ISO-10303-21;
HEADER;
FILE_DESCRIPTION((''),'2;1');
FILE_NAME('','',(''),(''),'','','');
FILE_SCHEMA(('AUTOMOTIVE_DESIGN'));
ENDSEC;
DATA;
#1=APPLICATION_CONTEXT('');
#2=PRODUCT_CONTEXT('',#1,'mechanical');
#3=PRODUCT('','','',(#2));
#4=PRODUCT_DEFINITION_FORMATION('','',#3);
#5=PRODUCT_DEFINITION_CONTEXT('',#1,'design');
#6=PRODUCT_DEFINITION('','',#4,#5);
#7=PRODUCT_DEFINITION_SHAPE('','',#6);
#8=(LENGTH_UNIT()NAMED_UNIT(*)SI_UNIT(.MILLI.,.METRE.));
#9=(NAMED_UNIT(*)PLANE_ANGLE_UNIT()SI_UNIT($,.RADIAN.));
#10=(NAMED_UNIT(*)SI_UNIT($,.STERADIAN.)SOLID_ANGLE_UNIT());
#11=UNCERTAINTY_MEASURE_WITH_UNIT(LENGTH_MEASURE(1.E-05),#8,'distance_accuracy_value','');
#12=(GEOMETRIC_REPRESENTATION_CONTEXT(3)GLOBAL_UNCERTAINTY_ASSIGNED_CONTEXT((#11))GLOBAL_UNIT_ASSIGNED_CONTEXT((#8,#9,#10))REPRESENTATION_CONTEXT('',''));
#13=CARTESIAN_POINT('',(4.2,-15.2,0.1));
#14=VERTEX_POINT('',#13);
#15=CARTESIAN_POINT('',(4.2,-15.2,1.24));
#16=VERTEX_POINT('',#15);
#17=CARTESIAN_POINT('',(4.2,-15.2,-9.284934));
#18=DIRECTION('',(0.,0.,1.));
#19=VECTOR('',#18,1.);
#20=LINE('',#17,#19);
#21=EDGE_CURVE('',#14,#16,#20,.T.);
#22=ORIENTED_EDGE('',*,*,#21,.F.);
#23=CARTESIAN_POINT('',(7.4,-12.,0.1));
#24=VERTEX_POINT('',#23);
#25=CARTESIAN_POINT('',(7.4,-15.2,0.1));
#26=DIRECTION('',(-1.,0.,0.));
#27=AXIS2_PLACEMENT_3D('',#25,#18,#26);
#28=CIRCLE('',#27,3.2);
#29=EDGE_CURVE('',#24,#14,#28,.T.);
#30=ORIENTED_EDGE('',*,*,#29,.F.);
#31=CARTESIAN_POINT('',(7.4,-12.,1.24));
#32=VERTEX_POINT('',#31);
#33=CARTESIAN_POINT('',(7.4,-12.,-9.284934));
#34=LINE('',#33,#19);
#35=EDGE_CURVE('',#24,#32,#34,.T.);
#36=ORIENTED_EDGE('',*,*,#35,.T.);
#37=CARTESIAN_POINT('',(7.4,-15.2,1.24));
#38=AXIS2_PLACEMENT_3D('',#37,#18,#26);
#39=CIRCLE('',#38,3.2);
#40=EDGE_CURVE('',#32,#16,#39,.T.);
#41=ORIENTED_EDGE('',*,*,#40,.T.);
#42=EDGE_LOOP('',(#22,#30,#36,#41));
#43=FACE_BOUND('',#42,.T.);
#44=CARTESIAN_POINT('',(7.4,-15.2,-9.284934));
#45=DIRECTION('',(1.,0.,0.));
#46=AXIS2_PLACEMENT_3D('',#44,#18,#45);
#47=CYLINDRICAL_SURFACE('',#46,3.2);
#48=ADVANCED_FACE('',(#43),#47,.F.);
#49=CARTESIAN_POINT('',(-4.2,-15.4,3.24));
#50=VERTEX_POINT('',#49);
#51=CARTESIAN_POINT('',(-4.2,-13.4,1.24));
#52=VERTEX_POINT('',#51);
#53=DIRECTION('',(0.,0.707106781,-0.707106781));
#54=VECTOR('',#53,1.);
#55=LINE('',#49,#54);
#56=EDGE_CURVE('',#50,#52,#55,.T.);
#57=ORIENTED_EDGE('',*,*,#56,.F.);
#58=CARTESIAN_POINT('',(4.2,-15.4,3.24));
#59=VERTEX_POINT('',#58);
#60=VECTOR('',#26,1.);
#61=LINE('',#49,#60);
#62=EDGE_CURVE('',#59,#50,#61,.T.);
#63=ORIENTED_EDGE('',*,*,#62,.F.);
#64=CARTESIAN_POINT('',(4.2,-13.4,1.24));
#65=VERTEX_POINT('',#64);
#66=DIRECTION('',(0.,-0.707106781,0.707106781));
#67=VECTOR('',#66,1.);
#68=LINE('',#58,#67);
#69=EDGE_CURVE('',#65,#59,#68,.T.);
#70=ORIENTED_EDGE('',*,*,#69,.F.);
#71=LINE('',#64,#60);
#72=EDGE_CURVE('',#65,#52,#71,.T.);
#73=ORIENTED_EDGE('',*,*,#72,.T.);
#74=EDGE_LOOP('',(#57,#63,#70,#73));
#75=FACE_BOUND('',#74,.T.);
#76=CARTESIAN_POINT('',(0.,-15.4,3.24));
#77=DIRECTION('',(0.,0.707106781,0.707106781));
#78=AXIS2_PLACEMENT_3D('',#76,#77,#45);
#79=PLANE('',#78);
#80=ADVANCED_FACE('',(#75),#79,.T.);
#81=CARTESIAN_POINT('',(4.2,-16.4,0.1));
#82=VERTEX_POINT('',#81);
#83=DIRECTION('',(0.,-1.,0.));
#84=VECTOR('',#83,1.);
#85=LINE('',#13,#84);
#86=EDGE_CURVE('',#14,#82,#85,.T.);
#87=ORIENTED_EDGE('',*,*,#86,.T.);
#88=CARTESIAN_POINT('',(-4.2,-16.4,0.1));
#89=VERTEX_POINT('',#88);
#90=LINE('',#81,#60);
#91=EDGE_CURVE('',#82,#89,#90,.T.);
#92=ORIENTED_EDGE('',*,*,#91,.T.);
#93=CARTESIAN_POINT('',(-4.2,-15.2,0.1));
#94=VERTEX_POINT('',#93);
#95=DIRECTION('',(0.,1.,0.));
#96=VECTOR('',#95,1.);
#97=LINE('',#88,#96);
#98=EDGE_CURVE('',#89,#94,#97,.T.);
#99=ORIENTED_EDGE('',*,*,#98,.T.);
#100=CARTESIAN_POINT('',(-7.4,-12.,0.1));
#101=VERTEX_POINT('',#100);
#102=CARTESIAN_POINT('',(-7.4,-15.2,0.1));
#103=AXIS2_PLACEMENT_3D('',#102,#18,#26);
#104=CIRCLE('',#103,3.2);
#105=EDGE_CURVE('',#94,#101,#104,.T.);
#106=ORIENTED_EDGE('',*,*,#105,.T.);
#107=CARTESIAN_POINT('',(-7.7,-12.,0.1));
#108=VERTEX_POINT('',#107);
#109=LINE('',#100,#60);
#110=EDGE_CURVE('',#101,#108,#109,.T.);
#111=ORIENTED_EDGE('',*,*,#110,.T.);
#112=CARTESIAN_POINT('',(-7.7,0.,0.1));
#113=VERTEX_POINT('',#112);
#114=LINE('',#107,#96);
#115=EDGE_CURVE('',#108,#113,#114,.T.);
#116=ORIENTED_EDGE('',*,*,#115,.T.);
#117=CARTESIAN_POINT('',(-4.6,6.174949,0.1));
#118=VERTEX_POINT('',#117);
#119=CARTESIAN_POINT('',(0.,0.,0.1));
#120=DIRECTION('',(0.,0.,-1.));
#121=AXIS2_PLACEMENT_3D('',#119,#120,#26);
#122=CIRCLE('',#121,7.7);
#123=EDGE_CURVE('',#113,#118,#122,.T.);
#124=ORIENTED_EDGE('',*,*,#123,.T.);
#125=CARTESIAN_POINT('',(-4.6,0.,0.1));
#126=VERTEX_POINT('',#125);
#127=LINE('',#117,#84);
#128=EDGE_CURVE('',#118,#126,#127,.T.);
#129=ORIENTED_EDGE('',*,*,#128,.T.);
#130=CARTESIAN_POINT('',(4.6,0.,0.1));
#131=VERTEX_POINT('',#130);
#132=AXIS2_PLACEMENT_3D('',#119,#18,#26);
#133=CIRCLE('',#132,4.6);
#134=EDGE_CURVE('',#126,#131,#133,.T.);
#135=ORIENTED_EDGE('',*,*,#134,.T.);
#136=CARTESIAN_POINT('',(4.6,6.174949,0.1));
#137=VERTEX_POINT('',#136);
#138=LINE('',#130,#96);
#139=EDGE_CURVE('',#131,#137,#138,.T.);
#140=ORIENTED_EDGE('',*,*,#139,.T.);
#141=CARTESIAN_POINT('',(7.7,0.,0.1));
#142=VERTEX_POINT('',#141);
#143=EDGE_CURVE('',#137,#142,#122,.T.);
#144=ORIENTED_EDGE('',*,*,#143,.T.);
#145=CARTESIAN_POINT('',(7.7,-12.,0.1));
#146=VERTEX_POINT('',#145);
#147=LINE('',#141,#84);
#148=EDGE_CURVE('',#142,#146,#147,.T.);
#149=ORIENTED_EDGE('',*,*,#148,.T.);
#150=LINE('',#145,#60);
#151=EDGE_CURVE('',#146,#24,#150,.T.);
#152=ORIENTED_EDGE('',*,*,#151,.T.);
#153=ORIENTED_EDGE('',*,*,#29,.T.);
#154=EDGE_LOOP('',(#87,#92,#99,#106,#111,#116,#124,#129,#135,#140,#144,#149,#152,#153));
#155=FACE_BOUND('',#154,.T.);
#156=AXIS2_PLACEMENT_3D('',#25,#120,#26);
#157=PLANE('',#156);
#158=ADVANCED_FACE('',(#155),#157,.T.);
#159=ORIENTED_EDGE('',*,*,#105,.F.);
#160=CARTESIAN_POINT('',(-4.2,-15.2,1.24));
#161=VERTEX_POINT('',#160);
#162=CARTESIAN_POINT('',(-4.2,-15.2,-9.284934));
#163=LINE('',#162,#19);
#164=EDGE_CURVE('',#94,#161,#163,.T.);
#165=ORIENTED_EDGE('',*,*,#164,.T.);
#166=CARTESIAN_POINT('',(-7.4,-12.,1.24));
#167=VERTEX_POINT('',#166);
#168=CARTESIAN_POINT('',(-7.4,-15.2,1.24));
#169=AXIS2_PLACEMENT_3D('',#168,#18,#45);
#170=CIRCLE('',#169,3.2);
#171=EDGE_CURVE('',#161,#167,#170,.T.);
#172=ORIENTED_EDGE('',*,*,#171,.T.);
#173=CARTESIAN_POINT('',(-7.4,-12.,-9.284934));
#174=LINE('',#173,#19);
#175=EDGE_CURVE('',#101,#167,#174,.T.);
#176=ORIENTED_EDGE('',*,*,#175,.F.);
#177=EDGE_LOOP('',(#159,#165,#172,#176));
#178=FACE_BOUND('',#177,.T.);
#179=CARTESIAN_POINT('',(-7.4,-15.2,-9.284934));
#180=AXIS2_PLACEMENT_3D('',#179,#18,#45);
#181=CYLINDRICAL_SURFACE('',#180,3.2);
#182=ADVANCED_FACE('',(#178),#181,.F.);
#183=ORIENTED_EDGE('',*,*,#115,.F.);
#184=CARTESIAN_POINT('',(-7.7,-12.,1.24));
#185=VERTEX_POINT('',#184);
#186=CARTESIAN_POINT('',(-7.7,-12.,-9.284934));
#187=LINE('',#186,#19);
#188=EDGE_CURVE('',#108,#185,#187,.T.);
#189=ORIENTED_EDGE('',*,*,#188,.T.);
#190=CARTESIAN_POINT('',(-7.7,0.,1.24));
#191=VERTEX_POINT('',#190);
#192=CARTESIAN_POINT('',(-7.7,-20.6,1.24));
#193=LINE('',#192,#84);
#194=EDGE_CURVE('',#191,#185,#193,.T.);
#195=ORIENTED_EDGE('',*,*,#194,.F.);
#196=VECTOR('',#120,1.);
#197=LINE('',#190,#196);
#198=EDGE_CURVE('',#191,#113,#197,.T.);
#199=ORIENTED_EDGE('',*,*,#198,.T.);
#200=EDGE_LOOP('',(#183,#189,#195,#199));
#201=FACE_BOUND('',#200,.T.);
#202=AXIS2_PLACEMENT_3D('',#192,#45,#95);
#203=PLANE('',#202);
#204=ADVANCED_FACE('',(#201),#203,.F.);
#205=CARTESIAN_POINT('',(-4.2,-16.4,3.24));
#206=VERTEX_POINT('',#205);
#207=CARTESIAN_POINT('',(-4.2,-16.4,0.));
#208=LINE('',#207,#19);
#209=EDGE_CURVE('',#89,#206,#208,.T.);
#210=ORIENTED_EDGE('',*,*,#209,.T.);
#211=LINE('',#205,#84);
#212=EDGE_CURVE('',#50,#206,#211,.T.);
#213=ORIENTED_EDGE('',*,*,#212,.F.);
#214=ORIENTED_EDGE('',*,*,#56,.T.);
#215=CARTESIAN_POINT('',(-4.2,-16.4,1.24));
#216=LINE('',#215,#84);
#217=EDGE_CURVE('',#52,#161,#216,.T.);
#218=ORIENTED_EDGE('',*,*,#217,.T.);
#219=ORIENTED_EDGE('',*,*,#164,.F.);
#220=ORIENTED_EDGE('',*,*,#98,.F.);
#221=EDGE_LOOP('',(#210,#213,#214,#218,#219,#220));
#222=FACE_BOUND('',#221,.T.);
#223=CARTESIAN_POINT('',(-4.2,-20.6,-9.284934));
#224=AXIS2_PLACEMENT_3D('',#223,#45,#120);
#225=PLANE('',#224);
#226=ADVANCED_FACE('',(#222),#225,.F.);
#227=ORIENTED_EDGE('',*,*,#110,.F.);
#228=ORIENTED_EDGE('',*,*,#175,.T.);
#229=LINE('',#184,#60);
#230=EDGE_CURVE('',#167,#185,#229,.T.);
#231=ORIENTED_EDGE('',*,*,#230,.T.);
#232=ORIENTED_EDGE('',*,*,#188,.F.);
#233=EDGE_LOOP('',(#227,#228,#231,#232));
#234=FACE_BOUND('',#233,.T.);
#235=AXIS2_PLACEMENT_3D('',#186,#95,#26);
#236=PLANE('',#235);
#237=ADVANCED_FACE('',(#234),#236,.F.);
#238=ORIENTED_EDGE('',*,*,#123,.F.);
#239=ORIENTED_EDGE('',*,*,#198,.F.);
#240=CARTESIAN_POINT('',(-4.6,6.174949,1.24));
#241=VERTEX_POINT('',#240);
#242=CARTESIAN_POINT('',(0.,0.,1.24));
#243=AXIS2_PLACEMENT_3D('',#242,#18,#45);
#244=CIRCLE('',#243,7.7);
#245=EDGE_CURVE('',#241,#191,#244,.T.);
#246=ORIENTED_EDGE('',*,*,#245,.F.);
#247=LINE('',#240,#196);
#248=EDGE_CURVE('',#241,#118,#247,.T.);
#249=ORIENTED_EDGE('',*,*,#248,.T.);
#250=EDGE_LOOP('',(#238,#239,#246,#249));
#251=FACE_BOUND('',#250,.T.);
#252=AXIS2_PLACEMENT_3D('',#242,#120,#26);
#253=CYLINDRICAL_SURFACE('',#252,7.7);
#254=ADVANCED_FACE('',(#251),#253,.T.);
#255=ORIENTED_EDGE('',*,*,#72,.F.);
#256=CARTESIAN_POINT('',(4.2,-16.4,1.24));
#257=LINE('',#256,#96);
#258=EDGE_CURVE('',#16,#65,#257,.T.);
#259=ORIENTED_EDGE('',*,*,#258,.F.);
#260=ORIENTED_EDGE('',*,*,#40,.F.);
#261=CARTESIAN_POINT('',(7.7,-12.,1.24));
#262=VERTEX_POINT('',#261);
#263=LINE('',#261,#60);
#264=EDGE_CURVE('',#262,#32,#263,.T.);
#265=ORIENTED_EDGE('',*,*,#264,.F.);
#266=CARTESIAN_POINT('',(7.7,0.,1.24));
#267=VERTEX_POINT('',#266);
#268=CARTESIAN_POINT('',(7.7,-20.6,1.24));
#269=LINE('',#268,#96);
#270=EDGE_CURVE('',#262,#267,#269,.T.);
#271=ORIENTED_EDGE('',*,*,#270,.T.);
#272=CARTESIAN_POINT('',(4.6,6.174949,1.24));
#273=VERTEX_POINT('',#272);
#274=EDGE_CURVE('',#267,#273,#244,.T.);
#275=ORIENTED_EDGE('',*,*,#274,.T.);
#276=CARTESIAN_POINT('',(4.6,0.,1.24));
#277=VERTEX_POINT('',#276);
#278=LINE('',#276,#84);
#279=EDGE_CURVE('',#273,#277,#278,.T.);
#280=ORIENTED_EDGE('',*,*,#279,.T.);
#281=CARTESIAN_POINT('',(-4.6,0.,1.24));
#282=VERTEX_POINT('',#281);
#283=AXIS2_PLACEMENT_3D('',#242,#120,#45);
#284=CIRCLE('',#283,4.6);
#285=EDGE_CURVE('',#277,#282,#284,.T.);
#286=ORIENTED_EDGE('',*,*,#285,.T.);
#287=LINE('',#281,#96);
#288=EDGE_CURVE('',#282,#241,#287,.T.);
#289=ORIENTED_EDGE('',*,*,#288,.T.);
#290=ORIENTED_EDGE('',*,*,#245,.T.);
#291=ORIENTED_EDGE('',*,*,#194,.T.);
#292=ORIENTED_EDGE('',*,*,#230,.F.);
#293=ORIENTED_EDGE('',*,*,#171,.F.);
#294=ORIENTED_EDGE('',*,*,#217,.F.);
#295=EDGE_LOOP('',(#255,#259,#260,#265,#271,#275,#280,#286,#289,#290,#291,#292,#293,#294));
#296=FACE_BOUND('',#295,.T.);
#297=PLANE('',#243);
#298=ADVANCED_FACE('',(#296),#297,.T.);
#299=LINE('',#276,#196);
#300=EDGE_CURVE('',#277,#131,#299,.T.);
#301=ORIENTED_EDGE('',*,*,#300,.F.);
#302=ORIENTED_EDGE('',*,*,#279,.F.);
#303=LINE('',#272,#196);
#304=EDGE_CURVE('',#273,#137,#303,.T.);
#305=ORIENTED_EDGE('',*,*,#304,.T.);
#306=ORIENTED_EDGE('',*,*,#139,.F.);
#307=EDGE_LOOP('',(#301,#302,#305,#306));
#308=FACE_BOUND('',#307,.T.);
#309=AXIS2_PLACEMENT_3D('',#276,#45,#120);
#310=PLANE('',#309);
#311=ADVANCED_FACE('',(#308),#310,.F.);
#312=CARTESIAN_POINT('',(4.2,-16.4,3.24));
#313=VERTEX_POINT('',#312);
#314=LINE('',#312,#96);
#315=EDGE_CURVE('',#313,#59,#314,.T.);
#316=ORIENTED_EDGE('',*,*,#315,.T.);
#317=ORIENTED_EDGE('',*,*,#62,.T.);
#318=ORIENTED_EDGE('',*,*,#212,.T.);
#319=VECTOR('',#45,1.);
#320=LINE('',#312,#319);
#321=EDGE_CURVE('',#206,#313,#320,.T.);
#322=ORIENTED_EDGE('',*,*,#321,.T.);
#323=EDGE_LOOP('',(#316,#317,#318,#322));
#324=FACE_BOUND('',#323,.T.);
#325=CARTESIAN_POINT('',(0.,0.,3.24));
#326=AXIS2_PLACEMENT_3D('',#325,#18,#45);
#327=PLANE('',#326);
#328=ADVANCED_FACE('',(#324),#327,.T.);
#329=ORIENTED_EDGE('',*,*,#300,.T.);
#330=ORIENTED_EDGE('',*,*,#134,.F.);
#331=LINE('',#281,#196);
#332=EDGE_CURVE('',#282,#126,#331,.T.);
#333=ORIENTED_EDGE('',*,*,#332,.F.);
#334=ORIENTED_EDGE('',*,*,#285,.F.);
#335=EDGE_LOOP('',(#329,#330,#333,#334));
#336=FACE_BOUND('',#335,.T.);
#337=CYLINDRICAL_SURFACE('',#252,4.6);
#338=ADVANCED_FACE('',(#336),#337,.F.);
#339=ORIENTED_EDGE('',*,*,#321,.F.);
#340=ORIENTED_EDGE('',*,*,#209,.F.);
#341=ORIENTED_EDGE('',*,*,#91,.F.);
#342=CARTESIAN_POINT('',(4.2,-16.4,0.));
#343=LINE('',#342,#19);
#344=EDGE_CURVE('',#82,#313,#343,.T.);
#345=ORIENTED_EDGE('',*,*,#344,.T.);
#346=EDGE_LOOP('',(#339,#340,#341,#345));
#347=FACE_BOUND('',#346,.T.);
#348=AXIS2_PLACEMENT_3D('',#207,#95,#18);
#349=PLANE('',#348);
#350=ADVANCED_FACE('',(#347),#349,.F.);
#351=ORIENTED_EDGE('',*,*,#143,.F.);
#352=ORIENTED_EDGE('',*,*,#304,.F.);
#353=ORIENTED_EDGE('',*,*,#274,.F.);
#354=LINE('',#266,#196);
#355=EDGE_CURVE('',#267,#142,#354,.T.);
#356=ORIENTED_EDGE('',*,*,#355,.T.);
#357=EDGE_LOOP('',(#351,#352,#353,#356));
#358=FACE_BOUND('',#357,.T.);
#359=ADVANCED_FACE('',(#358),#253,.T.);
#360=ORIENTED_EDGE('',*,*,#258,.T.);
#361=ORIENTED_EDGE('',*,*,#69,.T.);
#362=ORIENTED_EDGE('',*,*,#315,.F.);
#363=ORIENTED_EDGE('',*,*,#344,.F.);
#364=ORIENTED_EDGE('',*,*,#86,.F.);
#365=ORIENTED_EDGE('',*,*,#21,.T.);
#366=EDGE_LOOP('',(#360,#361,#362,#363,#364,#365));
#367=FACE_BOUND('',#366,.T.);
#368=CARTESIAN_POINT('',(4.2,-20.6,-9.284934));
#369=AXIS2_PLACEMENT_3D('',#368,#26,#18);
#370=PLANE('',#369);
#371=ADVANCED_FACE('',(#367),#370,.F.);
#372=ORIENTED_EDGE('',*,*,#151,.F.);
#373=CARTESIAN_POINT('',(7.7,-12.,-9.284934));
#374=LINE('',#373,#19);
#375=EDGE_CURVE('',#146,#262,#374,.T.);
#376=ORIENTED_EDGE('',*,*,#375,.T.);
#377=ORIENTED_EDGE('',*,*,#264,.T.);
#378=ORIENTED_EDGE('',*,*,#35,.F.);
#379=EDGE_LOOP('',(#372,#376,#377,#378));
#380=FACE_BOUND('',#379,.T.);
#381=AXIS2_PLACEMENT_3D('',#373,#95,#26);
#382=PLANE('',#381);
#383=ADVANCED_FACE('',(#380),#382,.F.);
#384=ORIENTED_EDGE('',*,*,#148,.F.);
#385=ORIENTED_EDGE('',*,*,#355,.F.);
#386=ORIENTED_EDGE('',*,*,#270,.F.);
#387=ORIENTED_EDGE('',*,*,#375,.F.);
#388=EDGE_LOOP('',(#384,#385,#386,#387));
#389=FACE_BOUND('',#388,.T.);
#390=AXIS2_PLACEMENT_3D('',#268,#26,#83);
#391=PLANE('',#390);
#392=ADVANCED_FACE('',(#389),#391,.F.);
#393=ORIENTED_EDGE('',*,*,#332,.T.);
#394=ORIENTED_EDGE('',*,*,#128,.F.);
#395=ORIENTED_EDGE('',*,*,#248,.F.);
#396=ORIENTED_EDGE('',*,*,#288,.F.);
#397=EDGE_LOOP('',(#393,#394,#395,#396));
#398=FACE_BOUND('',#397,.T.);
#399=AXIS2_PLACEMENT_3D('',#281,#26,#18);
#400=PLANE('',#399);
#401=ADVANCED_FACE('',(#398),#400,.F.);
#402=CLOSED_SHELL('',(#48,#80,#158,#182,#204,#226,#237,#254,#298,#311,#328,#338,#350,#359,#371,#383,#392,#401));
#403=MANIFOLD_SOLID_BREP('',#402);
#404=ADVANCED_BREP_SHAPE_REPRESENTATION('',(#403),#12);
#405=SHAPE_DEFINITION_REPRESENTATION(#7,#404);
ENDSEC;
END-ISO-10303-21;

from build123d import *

# Parameters (mm, degrees)
EXTRUDE_1_DEPTH     = 1.24
CUT_EXTRUDE_1_DEPTH = 1.24
SKETCH_4_W          = 8.4
SKETCH_4_H          = 3
EXTRUDE_2_DEPTH     = 2.2
CHAMFER_1_SIZE      = 1.2
CHAMFER_1_SIZE_2    = 2.4
SKETCH_5_W          = 8.4
SKETCH_5_H          = 4.2
CUT_EXTRUDE_2_DEPTH = 23.25946091
SKETCH_6_W          = 8.4
SKETCH_6_H          = 3
EXTRUDE_3_DEPTH     = 2
CHAMFER_2_SIZE      = 2
CUT_EXTRUDE_3_DEPTH = 0.1


# Some blends are built 0.0001 mm under size
with BuildPart() as part:
    # Эскиз1 → Бобышка-Вытянуть1 (new body)
    with BuildSketch(Plane.XY):
        with BuildLine():
            Line((-4.6, 0), (-4.6, 6.174949393))
            ThreePointArc((-4.6, 6.174949393), (-6.88149693, 3.454706934), (-7.7, 0))
            Line((-7.7, 0), (-7.7, -20.6))
            Line((-7.7, -20.6), (7.7, -20.6))
            Line((7.7, -20.6), (7.7, 0))
            ThreePointArc((7.7, 0), (6.88149693, 3.454706934), (4.6, 6.174949393))
            Line((4.6, 6.174949393), (4.6, 0))
            ThreePointArc((4.6, 0), (0, -4.6), (-4.6, 0))
        make_face()
    extrude(amount=EXTRUDE_1_DEPTH)

    # Эскиз3 → Вырез-Вытянуть1 (cut)
    with BuildSketch(Plane.XY.offset(1.24)):
        with BuildLine():
            Line((-7.7, -20.6), (-4.2, -20.6))
            Line((-4.2, -20.6), (-4.2, -15.2))
            ThreePointArc((-4.2, -15.2), (-5.1372583, -12.9372583), (-7.4, -12))
            Line((-7.4, -12), (-7.7, -12))
            Line((-7.7, -12), (-7.7, -20.6))
        make_face()
        with BuildLine():
            Line((4.2, -20.6), (4.2, -15.2))
            ThreePointArc((4.2, -15.2), (5.1372583, -12.9372583), (7.4, -12))
            Line((7.4, -12), (7.7, -12))
            Line((7.7, -12), (7.7, -20.6))
            Line((7.7, -20.6), (4.2, -20.6))
        make_face()
    extrude(amount=-CUT_EXTRUDE_1_DEPTH, mode=Mode.SUBTRACT)

    # Эскиз4 → Бобышка-Вытянуть2 (add)
    with BuildSketch(Plane.XY.offset(1.24)):
        with Locations((0, -19.1)):
            Rectangle(SKETCH_4_W, SKETCH_4_H)
    extrude(amount=EXTRUDE_2_DEPTH)

    # Фаска1
    # the kernel refuses this chamfer: 2.4, 1.2 mm, written as the material it adds along each edge
    with BuildSketch(Plane(origin=(4.2, -17.6, 1.24), x_dir=(0, 0.9976223042390325, -0.06891834360170876), z_dir=(-1, 0, 0))) as chamfer_1_piece_1_section:
        Polygon((CHAMFER_1_SIZE * 0.997622304239, -CHAMFER_1_SIZE * 0.0689183436017), (-CHAMFER_1_SIZE_2 * 0.0689183436017, -CHAMFER_1_SIZE_2 * 0.997622304239), (0, 0), align=None)
    chamfer_1_piece_1 = extrude(amount=8.4, mode=Mode.PRIVATE)
    chamfer_1_piece_1 = split(chamfer_1_piece_1, bisect_by=Plane(origin=(0, -17.211387721, 3.44), z_dir=(0, 0, -1)), keep=Keep.TOP, mode=Mode.PRIVATE)
    add(chamfer_1_piece_1)

    # Эскиз5 → Вырез-Вытянуть2 (cut, through all)
    with BuildSketch(Plane.XY.offset(3.44)):
        with Locations((0, -18.5)):
            Rectangle(SKETCH_5_W, SKETCH_5_H)
    extrude(amount=-CUT_EXTRUDE_2_DEPTH, mode=Mode.SUBTRACT)

    # Эскиз6 → Бобышка-Вытянуть3 (add)
    with BuildSketch(Plane.XY.offset(1.24)):
        with Locations((0, -14.9)):
            Rectangle(SKETCH_6_W, SKETCH_6_H)
    extrude(amount=EXTRUDE_3_DEPTH)

    # Фаска2
    chamfer_2_edges = [part.edges().sort_by_distance(p)[0] for p in [
        (0, -13.4, 3.24),
    ]]
    chamfer(chamfer_2_edges, length=CHAMFER_2_SIZE - 0.0001)  # a hair under: the kernel refuses the full size

    # Эскиз7 → Вырез-Вытянуть3 (cut)
    with BuildSketch(Plane(origin=(0, 0, 0), x_dir=(-1, 0, 0), z_dir=(0, 0, -1))):
        with BuildLine():
            Line((-4.2, -15.2), (-4.2, -16.4))
            Line((-4.2, -16.4), (4.2, -16.4))
            Line((4.2, -16.4), (4.2, -15.2))
            ThreePointArc((4.2, -15.2), (5.1372583, -12.9372583), (7.4, -12))
            Line((7.4, -12), (7.7, -12))
            Line((7.7, -12), (7.7, 0))
            ThreePointArc((7.7, 0), (6.88149693, 3.454706934), (4.6, 6.174949393))
            Line((4.6, 6.174949393), (4.6, 0))
            ThreePointArc((4.6, 0), (0, -4.6), (-4.6, 0))
            Line((-4.6, 0), (-4.6, 6.174949393))
            ThreePointArc((-4.6, 6.174949393), (-6.88149693, 3.454706934), (-7.7, 0))
            Line((-7.7, 0), (-7.7, -12))
            Line((-7.7, -12), (-7.4, -12))
            ThreePointArc((-7.4, -12), (-5.1372583, -12.9372583), (-4.2, -15.2))
        make_face()
    extrude(amount=-CUT_EXTRUDE_3_DEPTH, mode=Mode.SUBTRACT)


solid = part.part
